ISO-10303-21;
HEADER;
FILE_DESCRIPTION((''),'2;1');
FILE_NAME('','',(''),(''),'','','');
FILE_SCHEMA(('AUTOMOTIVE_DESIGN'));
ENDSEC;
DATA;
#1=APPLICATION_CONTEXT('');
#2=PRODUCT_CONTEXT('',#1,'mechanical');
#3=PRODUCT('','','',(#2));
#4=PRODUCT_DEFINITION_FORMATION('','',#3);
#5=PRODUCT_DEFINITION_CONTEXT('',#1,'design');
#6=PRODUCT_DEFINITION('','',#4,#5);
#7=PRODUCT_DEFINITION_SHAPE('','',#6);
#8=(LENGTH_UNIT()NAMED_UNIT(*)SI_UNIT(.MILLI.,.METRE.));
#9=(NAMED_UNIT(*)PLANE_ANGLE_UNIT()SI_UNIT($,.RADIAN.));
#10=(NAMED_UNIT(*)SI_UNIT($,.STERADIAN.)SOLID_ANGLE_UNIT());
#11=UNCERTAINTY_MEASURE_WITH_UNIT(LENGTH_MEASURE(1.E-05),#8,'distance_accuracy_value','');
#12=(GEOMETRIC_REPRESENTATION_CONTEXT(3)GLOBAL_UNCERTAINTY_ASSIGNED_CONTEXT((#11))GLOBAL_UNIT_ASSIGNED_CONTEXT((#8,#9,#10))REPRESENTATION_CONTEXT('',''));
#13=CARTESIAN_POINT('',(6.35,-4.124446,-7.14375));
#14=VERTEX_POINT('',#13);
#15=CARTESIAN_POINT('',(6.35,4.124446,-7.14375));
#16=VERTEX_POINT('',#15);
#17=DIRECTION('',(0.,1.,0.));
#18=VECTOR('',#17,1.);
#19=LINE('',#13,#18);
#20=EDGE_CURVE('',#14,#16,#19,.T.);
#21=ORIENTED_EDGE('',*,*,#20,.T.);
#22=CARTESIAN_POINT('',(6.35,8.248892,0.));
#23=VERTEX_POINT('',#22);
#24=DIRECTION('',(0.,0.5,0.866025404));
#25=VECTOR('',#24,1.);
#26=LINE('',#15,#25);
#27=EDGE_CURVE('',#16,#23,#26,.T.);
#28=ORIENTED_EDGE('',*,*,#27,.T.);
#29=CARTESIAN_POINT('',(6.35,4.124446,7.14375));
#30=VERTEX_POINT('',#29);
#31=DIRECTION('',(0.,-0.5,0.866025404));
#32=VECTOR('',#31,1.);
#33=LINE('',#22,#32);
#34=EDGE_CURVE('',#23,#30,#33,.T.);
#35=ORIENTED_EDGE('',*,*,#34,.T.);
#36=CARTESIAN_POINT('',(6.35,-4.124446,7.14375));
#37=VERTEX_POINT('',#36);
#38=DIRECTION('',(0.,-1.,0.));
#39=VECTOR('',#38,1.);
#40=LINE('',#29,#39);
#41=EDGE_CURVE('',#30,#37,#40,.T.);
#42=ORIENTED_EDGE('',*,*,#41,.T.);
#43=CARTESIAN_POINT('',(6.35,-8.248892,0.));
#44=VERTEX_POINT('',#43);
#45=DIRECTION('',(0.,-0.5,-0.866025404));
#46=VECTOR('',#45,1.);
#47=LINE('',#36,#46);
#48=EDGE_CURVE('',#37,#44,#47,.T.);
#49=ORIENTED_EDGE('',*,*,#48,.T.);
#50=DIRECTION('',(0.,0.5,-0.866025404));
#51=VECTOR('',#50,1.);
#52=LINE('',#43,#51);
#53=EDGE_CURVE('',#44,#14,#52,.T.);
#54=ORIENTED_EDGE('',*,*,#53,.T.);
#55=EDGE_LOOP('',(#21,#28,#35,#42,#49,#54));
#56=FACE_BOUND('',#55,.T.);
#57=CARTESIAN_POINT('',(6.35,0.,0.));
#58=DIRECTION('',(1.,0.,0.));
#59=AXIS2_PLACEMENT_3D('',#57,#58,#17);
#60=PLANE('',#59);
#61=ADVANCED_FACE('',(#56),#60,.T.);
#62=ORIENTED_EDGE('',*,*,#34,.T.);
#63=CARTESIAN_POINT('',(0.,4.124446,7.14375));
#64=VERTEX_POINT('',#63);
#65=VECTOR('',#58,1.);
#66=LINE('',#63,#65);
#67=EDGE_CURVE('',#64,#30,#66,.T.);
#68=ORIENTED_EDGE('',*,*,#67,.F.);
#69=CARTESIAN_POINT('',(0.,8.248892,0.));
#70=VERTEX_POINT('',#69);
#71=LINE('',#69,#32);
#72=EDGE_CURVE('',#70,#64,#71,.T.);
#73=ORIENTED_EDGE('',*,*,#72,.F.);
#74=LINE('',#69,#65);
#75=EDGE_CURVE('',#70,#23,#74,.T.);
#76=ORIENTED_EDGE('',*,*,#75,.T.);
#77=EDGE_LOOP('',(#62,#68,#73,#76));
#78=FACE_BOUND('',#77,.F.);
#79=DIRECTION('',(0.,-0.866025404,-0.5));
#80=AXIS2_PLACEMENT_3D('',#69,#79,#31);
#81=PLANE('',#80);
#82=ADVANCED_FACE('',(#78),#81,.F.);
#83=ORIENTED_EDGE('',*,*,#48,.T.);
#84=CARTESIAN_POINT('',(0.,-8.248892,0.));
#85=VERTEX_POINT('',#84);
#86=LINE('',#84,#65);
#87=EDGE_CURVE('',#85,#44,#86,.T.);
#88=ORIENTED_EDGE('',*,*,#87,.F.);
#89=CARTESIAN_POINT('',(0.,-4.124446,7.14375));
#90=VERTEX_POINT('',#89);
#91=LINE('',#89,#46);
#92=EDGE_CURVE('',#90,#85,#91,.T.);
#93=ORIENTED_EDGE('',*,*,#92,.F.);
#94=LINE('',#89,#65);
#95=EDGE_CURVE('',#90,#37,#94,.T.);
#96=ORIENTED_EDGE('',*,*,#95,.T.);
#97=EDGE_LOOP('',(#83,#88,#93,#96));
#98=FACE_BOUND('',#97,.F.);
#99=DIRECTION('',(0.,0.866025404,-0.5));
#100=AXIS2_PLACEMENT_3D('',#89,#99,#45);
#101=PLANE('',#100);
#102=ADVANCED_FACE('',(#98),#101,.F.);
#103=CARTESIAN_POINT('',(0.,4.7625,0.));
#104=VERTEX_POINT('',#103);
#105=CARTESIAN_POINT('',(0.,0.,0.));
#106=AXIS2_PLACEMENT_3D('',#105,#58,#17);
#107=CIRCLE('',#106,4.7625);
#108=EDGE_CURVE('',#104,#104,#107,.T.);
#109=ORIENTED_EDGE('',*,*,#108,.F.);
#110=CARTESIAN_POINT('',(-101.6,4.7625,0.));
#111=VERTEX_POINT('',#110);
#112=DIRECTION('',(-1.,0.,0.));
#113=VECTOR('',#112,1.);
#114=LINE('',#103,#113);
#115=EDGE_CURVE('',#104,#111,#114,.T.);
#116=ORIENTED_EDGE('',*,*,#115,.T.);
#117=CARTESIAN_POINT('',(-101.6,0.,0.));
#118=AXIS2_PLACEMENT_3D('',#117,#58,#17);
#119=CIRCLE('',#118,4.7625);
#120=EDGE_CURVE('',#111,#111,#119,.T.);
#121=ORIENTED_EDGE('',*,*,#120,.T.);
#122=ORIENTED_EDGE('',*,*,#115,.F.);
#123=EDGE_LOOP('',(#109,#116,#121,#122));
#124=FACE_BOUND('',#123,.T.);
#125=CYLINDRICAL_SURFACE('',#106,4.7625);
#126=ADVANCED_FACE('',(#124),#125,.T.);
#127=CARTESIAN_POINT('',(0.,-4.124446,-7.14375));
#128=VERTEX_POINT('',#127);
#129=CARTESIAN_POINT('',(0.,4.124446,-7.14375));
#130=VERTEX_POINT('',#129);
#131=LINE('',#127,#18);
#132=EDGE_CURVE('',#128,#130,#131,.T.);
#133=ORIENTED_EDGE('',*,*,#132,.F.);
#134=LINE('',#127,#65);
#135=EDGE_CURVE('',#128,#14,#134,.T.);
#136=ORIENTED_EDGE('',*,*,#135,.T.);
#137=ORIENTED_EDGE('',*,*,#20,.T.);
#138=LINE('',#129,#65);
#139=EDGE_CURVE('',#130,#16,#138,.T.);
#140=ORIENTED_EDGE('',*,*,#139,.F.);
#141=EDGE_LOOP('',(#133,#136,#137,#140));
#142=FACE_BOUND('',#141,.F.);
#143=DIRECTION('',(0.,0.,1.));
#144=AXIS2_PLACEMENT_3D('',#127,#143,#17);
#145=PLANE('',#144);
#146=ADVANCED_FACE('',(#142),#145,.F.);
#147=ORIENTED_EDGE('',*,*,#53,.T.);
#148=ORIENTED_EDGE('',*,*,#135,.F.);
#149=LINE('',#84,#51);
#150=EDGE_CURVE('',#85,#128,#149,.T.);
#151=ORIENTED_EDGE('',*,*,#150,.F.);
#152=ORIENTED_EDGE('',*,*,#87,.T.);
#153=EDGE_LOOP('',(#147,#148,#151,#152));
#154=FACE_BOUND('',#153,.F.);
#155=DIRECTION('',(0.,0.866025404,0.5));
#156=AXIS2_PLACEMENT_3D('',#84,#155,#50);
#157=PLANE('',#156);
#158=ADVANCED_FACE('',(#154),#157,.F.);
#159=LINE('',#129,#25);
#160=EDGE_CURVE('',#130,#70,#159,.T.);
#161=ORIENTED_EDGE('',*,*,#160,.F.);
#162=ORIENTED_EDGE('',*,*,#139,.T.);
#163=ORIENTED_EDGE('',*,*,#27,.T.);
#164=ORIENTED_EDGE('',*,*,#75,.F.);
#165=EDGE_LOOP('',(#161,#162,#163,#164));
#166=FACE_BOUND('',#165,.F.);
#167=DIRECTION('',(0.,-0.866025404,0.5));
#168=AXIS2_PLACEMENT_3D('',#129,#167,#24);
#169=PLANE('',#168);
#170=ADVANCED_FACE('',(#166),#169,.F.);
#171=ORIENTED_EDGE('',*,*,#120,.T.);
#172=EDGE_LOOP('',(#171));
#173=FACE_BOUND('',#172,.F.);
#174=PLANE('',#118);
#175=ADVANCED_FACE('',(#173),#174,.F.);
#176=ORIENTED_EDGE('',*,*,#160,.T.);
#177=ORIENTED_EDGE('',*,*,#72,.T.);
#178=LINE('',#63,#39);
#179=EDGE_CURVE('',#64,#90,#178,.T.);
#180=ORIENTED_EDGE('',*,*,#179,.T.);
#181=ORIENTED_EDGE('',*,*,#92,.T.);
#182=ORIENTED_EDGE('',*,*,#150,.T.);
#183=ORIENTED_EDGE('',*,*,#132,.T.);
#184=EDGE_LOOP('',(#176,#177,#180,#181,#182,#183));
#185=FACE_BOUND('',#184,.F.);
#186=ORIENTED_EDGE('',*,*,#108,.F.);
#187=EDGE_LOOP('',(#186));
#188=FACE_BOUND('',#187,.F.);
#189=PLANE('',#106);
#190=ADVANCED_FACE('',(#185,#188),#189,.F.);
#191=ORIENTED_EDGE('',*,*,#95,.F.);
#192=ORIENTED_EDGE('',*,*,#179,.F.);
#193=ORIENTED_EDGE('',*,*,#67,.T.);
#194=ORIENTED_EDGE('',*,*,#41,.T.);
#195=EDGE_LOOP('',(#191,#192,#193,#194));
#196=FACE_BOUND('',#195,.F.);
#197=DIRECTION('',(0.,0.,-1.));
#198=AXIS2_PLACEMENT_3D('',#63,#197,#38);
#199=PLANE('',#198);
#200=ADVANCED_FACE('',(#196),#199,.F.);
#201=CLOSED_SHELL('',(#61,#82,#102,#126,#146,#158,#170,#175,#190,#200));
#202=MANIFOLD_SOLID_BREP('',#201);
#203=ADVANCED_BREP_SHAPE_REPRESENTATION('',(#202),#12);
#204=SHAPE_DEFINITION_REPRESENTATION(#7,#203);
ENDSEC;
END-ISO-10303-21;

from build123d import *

# Parameters (mm, degrees)
F1_DEPTH = 6.35
F2_R     = 4.7625
F3_DEPTH = 101.6


# Not quite as in the source:
# - a length typed as a fraction of an inch, garbled in the dataset ("3 / 203.2 mm" for 3/8 in), is restored


with BuildPart() as f1:
    # F0 (on Right) → F1 (new body)
    with BuildSketch(Plane.YZ):
        Polygon((4.1244459855, 7.14375), (-4.1244459855, 7.14375), (-8.248891971, 0), (-4.1244459855, -7.14375), (4.1244459855, -7.14375), (8.248891971, 0), align=None)
    extrude(amount=F1_DEPTH)

    # F2 (on Right) → F3 (join)
    with BuildSketch(Plane.YZ):
        Circle(F2_R)
    extrude(amount=-F3_DEPTH)


solid = f1.part
